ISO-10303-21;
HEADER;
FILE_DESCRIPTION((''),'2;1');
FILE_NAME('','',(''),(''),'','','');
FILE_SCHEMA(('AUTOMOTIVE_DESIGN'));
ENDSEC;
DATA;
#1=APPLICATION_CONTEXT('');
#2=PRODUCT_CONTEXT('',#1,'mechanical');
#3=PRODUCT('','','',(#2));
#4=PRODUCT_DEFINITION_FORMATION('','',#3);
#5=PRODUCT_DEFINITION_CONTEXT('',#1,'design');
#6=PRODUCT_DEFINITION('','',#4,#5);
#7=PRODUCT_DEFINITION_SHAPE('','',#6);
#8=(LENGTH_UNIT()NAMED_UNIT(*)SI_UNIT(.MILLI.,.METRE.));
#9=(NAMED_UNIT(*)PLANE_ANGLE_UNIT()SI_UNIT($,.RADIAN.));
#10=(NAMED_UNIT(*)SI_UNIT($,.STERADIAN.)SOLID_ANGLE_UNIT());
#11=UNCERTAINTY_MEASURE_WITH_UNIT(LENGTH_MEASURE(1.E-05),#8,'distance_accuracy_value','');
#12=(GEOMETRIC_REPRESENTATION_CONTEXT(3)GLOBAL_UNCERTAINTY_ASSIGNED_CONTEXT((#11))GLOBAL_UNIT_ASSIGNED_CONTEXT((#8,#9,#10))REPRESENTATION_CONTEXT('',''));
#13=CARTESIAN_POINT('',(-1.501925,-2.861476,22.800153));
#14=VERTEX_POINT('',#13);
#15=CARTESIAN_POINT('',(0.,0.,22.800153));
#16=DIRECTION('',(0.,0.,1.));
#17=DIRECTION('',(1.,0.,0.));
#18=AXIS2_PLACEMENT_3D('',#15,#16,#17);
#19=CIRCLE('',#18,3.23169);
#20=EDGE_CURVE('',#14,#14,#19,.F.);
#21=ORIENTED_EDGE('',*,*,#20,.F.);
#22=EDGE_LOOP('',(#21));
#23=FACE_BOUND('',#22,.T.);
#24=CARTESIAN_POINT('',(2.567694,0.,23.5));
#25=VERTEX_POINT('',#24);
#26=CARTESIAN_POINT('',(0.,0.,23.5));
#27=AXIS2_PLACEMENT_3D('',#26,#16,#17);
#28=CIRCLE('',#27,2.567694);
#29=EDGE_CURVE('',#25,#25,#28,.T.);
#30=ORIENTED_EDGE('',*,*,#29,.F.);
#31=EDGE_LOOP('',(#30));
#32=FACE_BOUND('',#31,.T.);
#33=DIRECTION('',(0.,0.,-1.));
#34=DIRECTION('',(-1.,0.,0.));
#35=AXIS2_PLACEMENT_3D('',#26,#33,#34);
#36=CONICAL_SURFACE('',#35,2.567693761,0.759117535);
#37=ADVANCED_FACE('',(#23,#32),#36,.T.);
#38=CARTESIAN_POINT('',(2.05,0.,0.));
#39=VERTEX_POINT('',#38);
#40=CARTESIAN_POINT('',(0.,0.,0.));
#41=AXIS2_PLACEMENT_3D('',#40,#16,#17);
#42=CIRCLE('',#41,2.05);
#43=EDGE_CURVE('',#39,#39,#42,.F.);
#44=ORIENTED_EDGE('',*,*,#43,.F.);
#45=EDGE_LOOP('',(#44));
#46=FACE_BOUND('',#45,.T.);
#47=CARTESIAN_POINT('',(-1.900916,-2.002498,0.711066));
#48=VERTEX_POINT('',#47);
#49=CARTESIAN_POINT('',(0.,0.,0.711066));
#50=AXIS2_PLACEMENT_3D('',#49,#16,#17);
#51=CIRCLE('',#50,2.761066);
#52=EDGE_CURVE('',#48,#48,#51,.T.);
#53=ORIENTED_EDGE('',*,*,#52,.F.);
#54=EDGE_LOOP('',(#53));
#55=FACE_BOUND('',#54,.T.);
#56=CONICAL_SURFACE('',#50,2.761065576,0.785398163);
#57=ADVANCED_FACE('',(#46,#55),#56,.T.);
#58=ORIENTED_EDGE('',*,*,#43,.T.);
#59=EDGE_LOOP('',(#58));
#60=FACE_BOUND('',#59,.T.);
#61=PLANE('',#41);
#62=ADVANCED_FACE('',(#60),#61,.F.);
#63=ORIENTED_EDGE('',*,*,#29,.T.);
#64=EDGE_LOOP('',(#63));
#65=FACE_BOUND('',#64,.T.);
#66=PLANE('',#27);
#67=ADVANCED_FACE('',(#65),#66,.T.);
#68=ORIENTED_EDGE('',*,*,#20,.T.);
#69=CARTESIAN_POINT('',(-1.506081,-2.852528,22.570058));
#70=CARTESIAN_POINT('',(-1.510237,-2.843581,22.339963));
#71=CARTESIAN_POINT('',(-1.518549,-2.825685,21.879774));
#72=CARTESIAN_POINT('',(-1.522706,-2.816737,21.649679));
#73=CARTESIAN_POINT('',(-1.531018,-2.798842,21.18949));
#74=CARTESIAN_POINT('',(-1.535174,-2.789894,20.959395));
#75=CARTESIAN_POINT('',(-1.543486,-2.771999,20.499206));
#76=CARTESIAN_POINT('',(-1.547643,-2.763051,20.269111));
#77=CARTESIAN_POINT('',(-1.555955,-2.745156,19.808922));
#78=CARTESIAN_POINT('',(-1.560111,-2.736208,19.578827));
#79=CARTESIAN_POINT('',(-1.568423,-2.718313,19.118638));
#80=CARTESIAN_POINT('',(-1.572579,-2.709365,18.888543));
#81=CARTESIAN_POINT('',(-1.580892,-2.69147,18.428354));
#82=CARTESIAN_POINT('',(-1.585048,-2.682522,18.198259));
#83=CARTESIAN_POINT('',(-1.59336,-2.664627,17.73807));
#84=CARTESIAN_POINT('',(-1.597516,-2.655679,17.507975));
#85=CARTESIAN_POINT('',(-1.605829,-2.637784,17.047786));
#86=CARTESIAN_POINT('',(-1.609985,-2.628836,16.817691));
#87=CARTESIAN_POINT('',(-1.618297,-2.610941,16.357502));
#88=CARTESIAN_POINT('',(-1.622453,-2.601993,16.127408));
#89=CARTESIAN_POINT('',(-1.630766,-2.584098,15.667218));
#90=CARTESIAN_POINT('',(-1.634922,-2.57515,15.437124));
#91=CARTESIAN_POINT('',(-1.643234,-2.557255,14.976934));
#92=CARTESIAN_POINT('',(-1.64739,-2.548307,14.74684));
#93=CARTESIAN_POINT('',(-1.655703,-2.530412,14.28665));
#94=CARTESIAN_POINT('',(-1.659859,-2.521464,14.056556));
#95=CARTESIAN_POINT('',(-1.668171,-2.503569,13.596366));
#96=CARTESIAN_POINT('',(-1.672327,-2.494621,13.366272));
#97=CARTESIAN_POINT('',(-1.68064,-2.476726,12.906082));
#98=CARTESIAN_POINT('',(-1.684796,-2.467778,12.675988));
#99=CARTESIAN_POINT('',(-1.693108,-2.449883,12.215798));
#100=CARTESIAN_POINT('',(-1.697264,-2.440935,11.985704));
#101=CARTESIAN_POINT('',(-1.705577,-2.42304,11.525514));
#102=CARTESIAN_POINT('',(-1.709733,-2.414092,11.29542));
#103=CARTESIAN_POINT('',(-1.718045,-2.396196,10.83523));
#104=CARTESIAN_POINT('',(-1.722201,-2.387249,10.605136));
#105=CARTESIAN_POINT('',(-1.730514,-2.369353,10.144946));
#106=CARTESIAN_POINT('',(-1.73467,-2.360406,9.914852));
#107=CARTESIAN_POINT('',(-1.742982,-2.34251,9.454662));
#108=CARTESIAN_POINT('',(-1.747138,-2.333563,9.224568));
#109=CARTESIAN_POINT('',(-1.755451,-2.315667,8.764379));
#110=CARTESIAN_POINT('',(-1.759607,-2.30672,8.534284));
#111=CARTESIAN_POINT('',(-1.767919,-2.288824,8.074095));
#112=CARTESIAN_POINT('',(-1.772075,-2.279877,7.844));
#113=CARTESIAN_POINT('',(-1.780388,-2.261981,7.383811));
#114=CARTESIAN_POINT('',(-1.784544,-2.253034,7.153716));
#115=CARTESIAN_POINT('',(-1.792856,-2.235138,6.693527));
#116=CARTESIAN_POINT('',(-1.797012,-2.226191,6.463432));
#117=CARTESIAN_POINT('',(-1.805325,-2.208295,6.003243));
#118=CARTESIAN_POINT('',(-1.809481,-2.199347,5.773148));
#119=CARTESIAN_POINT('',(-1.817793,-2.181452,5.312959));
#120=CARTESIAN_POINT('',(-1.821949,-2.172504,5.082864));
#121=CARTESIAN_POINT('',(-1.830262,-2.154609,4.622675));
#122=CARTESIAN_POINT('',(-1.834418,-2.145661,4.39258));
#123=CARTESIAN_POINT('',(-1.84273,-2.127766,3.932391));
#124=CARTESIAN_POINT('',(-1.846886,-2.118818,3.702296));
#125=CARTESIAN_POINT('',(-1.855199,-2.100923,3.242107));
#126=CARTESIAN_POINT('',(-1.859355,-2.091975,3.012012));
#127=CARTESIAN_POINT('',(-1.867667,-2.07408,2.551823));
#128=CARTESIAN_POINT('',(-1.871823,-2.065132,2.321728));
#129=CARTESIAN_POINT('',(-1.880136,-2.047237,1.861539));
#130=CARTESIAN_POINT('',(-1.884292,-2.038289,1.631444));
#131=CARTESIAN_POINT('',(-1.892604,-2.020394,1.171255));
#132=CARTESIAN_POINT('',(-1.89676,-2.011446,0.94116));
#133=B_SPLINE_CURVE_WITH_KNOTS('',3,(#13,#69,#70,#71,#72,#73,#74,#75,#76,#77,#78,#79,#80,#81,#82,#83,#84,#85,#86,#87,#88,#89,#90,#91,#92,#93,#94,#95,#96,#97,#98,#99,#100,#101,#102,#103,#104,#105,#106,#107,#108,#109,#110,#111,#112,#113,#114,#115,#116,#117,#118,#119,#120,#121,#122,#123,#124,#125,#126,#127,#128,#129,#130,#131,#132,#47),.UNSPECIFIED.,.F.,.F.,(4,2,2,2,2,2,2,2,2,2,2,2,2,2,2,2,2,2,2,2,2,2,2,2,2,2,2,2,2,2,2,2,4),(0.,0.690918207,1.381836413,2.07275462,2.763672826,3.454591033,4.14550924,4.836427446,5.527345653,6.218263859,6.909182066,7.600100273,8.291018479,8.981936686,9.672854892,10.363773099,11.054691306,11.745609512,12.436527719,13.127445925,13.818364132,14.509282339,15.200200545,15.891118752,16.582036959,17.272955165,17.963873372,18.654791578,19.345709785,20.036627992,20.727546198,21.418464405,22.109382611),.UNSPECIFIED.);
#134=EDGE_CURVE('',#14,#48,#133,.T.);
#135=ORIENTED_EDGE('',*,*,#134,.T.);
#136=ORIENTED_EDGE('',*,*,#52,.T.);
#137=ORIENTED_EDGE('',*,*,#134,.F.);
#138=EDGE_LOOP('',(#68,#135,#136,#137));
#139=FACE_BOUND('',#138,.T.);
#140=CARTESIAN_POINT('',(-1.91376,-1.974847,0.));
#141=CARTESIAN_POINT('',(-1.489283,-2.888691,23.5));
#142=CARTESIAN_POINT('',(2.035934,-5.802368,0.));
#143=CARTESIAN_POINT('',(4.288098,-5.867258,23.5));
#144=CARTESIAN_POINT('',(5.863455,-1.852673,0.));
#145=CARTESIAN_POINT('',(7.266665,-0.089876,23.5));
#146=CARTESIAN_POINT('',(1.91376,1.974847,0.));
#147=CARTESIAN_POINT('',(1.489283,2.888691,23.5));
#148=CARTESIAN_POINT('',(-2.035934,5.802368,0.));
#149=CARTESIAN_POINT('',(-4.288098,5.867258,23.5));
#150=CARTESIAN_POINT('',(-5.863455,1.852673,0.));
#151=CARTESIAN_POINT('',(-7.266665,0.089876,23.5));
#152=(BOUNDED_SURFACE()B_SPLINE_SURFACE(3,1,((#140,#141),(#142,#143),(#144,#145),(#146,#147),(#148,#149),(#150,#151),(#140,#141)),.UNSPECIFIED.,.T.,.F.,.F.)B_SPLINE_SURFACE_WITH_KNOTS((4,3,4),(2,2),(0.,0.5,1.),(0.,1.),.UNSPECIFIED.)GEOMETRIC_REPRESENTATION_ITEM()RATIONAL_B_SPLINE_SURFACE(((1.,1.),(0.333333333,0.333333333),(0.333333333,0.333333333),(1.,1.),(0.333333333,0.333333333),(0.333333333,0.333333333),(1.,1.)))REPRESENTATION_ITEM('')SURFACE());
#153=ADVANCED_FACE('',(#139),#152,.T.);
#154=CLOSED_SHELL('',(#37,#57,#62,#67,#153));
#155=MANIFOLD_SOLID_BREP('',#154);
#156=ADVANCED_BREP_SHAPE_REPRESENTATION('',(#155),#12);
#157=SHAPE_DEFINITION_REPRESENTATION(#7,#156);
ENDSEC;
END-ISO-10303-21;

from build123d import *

# Parameters (mm, degrees)
CHAMFER_1_SIZE   = 0.7
CHAMFER_1_SIZE_2 = 0.682306239


with BuildPart() as part:
    # 로프트1: read off the stored shape, not the designer's step
    # 로프트1: loft between two sections, ruled curve by curve
    loft_1_from = [
        Edge.make_bspline([(-1.913760191, -1.974847319, 0), (2.035934447, -5.8023677, 0), (5.863454828, -1.852673062, 0), (1.913760191, 1.974847319, 0), (-2.035934447, 5.8023677, 0), (-5.863454828, 1.852673062, 0), (-1.913760191, -1.974847319, 0)], [0, 0, 0, 0, 0.5, 0.5, 0.5, 1, 1, 1, 1], 3, [1, 0.333333333, 0.333333333, 1, 0.333333333, 0.333333333, 1]),
    ]
    loft_1_to = [
        Edge.make_bspline([(-1.489283496, -2.888690822, 23.5), (4.288098148, -5.867257815, 23.5), (7.266665141, -0.08987617, 23.5), (1.489283496, 2.888690822, 23.5), (-4.288098148, 5.867257815, 23.5), (-7.266665141, 0.08987617, 23.5), (-1.489283496, -2.888690822, 23.5)], [0, 0, 0, 0, 0.5, 0.5, 0.5, 1, 1, 1, 1], 3, [1, 0.333333333, 0.333333333, 1, 0.333333333, 0.333333333, 1]),
    ]
    loft_1 = Solid(Shell([*[Face.make_surface_from_curves(loft_1_from[k], loft_1_to[k]) for k in range(1)], Face(Wire(loft_1_from)), Face(Wire(loft_1_to))]))
    add(loft_1)

    # 모따기1
    # the kernel refuses this chamfer: 0.711000351, 0.7, 0.682306239 mm, written as the material it takes off along each edge
    with BuildSketch(Plane(origin=(0, 0, 0), x_dir=(-0.6959127966509282, -0.7181262977063881, 0), z_dir=(-0.7181262977063881, 0.6959127966509282, 0))) as chamfer_1_piece_1:
        with BuildLine():
            Line((2.761065576, 0.711065576), (2.75 - CHAMFER_1_SIZE, 0))
            Line((2.75 - CHAMFER_1_SIZE, 0), (2.75, 0))
            ThreePointArc((2.75, 0), (2.75565509, 0.365742485), (2.761065576, 0.711065576))
        make_face()
    revolve(axis=Axis((0, 0, 0), (0, 0, 1)), mode=Mode.SUBTRACT)
    with BuildSketch(Plane(origin=(0, 0, 23.5), x_dir=(-0.458241075757006, -0.8888279453803543, 1.0931426705212666e-15), z_dir=(-0.8888279453803543, 0.458241075757006, 0))) as chamfer_1_piece_2:
        with BuildLine():
            Line((3.231690288, -0.699847458), (3.25 - CHAMFER_1_SIZE_2, 0))
            Line((3.25 - CHAMFER_1_SIZE_2, 0), (3.25, 0))
            ThreePointArc((3.25, 0), (3.240564435, -0.35982053), (3.231690288, -0.699847458))
        make_face()
    revolve(axis=Axis((0, 0, 23.5), (0, 0, 1)), mode=Mode.SUBTRACT)


solid = part.part
